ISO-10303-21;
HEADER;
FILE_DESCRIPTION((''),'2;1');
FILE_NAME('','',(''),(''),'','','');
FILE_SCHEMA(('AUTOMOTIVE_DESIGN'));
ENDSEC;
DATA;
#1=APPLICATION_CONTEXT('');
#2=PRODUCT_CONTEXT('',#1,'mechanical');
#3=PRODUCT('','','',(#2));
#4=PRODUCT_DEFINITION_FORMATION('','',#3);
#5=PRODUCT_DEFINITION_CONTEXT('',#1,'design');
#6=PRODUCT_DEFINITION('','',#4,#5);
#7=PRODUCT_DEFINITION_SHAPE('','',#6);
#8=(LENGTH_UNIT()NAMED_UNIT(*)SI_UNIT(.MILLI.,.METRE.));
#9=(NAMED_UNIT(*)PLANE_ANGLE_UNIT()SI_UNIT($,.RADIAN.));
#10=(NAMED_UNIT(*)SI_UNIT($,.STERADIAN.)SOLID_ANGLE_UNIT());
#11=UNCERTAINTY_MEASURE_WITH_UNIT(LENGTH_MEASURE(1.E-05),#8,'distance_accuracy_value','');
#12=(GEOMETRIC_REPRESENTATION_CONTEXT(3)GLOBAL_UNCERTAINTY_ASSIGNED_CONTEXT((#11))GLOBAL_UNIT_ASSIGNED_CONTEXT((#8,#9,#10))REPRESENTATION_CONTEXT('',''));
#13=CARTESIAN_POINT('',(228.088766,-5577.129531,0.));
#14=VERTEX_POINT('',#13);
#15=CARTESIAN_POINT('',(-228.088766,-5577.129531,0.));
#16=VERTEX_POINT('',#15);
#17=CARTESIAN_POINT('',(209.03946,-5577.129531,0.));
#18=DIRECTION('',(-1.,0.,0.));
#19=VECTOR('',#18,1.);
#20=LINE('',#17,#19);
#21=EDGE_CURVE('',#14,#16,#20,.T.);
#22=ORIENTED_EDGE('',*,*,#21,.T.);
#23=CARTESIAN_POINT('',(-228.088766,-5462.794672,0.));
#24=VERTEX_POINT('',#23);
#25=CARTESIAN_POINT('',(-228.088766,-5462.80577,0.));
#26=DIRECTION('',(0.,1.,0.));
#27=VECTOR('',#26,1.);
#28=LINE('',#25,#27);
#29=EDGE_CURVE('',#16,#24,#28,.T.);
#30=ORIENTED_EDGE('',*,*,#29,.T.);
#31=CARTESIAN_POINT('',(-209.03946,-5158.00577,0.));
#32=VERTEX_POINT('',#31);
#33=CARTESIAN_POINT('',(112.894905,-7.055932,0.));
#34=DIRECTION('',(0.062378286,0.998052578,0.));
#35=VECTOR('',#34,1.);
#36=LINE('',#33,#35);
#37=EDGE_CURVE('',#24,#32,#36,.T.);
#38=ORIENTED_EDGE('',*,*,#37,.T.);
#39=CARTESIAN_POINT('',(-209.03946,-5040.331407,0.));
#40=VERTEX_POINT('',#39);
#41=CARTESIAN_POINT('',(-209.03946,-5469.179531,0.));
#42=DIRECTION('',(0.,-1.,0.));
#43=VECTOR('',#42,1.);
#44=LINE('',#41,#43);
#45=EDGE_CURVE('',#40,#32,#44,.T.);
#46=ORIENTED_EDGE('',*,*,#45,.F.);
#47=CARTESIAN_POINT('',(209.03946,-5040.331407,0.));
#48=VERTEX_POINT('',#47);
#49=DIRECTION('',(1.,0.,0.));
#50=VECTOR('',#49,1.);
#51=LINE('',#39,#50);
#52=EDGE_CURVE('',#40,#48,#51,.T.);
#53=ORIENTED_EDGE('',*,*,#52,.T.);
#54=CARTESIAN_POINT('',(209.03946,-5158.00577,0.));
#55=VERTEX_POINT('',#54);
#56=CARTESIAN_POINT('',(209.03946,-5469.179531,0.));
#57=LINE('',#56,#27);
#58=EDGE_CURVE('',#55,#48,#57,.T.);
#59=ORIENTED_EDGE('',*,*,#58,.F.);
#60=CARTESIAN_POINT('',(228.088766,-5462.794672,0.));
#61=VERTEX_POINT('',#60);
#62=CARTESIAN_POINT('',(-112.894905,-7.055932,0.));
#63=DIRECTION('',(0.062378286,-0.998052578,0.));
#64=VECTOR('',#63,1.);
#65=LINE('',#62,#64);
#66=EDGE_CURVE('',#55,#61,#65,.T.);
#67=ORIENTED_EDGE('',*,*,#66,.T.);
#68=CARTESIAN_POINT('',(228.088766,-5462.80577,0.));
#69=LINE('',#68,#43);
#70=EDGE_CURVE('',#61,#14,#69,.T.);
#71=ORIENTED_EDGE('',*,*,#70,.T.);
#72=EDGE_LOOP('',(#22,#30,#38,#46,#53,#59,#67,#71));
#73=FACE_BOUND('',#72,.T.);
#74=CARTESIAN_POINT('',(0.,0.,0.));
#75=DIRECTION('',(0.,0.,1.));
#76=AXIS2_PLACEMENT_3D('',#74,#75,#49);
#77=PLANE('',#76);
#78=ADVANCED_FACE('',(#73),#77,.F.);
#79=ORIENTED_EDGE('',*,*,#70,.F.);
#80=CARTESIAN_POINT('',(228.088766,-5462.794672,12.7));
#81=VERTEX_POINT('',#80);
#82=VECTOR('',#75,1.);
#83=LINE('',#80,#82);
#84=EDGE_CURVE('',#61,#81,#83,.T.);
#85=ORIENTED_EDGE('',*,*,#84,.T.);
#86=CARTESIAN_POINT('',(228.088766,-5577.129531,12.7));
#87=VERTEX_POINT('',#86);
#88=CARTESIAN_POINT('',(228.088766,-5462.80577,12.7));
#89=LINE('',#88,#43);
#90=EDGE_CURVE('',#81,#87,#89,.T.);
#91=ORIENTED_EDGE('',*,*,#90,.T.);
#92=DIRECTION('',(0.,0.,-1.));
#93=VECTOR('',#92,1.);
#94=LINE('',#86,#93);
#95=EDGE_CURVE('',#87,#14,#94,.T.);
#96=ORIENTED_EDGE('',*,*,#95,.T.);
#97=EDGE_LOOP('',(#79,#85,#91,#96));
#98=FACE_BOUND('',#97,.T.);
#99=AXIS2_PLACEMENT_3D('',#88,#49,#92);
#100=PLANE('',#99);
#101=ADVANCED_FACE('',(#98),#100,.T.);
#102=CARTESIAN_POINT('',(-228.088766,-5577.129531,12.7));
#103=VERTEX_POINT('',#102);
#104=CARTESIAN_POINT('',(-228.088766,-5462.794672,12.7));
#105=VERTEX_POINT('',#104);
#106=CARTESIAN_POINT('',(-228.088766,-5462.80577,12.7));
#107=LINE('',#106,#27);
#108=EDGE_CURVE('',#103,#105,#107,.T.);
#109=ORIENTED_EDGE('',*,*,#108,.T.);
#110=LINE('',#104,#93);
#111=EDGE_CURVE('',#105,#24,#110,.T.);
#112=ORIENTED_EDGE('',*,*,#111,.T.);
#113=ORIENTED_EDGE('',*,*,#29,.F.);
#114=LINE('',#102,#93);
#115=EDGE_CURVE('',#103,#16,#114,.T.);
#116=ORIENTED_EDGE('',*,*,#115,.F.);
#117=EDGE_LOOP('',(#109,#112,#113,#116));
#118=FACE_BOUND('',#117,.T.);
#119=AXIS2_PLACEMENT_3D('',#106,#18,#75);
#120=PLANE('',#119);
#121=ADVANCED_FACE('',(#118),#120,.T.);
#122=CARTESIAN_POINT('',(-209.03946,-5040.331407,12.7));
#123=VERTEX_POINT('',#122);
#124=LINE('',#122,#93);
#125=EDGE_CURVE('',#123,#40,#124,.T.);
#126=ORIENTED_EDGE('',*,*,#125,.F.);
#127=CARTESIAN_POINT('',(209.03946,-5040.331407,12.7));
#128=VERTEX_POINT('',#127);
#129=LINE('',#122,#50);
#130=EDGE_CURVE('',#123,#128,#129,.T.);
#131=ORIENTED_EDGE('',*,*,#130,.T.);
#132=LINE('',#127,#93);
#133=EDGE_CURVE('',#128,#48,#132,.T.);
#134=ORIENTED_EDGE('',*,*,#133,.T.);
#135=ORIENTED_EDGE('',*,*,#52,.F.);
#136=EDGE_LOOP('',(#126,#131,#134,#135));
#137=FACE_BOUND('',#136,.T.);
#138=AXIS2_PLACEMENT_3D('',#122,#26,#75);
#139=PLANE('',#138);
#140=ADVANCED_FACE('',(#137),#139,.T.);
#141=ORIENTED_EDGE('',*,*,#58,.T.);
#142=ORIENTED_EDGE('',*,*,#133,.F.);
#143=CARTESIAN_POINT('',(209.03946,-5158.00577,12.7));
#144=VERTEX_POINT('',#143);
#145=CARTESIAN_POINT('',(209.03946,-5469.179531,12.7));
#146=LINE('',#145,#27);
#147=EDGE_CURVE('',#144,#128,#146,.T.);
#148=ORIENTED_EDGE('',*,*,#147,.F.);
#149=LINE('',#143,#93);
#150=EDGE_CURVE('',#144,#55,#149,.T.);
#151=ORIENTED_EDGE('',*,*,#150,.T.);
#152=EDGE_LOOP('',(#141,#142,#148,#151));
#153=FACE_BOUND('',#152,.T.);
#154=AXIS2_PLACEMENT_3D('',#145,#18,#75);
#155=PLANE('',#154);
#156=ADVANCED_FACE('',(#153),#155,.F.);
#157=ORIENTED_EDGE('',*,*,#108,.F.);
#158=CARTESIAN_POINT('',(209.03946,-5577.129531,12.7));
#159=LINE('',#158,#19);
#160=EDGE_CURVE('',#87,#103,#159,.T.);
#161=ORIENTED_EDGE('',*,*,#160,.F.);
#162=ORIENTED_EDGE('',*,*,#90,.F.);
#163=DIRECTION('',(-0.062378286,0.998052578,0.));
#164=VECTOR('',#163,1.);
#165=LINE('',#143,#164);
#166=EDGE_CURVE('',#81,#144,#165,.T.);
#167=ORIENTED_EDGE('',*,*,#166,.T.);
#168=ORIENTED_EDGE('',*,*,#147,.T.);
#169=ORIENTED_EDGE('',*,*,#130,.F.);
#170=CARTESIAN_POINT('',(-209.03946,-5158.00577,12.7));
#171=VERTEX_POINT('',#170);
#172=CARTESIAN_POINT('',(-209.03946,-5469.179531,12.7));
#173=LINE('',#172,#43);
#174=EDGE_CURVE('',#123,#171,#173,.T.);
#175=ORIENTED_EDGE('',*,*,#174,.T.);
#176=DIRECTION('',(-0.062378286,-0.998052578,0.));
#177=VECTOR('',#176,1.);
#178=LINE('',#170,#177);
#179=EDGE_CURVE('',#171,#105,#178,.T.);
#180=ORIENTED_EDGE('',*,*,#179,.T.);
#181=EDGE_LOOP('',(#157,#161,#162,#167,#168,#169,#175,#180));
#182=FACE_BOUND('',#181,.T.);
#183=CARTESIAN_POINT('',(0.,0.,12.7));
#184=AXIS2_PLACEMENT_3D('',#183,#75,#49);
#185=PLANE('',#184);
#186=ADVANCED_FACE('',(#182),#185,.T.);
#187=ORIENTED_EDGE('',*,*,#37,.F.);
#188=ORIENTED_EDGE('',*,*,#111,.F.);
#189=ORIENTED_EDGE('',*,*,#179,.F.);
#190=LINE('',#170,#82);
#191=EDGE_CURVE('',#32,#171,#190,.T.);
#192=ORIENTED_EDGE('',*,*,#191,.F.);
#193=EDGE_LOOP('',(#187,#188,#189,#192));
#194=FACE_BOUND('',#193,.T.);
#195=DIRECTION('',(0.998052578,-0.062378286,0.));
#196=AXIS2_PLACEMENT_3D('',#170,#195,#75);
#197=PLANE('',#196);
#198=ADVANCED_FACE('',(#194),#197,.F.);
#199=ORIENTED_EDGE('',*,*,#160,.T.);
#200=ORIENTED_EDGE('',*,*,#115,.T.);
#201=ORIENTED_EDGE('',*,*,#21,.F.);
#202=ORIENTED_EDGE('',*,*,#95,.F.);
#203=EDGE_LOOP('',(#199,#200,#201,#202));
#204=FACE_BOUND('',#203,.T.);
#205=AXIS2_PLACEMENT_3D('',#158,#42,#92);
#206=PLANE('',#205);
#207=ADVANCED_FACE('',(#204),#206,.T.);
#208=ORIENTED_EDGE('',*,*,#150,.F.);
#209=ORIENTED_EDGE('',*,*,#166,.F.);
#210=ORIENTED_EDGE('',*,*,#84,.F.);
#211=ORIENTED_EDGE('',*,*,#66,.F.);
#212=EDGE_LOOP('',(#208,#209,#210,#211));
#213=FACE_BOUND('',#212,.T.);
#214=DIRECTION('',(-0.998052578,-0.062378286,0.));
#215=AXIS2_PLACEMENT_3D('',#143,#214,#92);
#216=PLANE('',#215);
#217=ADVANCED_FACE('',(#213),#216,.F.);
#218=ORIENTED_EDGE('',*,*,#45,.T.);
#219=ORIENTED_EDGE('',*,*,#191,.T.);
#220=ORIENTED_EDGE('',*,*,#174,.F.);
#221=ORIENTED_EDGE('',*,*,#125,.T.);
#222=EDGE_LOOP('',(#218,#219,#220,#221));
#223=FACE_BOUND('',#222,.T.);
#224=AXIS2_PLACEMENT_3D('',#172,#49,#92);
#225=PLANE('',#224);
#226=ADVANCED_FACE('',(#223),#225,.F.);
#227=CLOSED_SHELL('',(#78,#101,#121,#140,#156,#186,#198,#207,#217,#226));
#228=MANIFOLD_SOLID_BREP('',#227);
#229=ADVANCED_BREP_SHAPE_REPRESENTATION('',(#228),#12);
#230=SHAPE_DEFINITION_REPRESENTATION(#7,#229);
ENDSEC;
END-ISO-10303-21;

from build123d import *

# Parameters (mm, degrees)
SKETCH1_W           = 418.07892
SKETCH1_H           = 415.925
BOSS_EXTRUDE1_DEPTH = 12.7
SKETCH2_W           = 418.07892
SKETCH2_H           = 107.95
BOSS_EXTRUDE2_DEPTH = 12.7
SKETCH3_W           = 418.07892
SKETCH3_H           = 12.923123126
BOSS_EXTRUDE3_DEPTH = 12.7
BOSS_EXTRUDE4_DEPTH = 12.7
CHAMFER1_SIZE       = 304.8
CHAMFER1_SIZE_2     = 19.05


with BuildPart() as part:
    # Sketch1 → Boss-Extrude1 (new body)
    with BuildSketch(Plane.XY):
        with Locations((0, -5261.217030575)):
            Rectangle(SKETCH1_W, SKETCH1_H)
    extrude(amount=BOSS_EXTRUDE1_DEPTH)

    # Sketch2 → Boss-Extrude2 (add, through all)
    with BuildSketch(Plane(origin=(0, 0, 0), x_dir=(-1, 0, 0), z_dir=(0, 0, -1))):
        with Locations((0, -5523.154530575)):
            Rectangle(SKETCH2_W, SKETCH2_H)
    extrude(amount=-BOSS_EXTRUDE2_DEPTH)

    # Sketch3 → Boss-Extrude3 (add, through all)
    with BuildSketch(Plane(origin=(0, 0, 0), x_dir=(-1, 0, 0), z_dir=(0, 0, -1))):
        with Locations((0, -5046.792969012)):
            Rectangle(SKETCH3_W, SKETCH3_H)
    extrude(amount=-BOSS_EXTRUDE3_DEPTH)

    # Sketch4 → Boss-Extrude4 (add, through all)
    with BuildSketch(Plane(origin=(0, 0, 0), x_dir=(-1, 0, 0), z_dir=(0, 0, -1))):
        Polygon((209.038766336, -5462.805770365), (228.088766336, -5462.805770365), (228.088766336, -5577.129530575), (209.03946, -5577.129530575), align=None)
        Polygon((-209.03946, -5577.129530575), (-209.038766336, -5462.805770365), (-228.088766336, -5462.805770365), (-228.088766336, -5577.129530575), align=None)
    extrude(amount=-BOSS_EXTRUDE4_DEPTH)

    # Chamfer1
    # the kernel refuses this chamfer: 304.8, 19.05 mm, written as the material it adds along each edge
    with BuildSketch(Plane(origin=(-209.03946, -5462.805770365, 0), x_dir=(0.002399337658707147, 0.9999971215852571, 0), z_dir=(0, 0, 1))) as chamfer1_piece_1_section:
        Polygon((CHAMFER1_SIZE * 0.999997121585, CHAMFER1_SIZE * 0.00239933765871), (-CHAMFER1_SIZE_2 * 0.00239933765871, CHAMFER1_SIZE_2 * 0.999997121585), (0, 0), align=None)
    chamfer1_piece_1 = extrude(amount=12.7, mode=Mode.PRIVATE)
    chamfer1_piece_1 = split(chamfer1_piece_1, bisect_by=Plane(origin=(-228.088766336, -5341.135021574, 6.35), z_dir=(1, 0, 0)), keep=Keep.TOP, mode=Mode.PRIVATE)
    add(chamfer1_piece_1)
    with BuildSketch(Plane(origin=(209.03946, -5462.805770365, 0), x_dir=(0.8520963193143735, -0.5233850041899339, 0), z_dir=(0, 0, 1))) as chamfer1_piece_2_section:
        Polygon((CHAMFER1_SIZE_2 * 0.852096319314, CHAMFER1_SIZE_2 * 0.52338500419), (-CHAMFER1_SIZE * 0.52338500419, CHAMFER1_SIZE * 0.852096319314), (0, 0), align=None)
    chamfer1_piece_2 = extrude(amount=12.7, mode=Mode.PRIVATE)
    chamfer1_piece_2 = split(chamfer1_piece_2, bisect_by=Plane(origin=(228.088766336, -5341.135021574, 6.35), z_dir=(-1, 0, 0)), keep=Keep.TOP, mode=Mode.PRIVATE)
    add(chamfer1_piece_2)


solid = part.part
